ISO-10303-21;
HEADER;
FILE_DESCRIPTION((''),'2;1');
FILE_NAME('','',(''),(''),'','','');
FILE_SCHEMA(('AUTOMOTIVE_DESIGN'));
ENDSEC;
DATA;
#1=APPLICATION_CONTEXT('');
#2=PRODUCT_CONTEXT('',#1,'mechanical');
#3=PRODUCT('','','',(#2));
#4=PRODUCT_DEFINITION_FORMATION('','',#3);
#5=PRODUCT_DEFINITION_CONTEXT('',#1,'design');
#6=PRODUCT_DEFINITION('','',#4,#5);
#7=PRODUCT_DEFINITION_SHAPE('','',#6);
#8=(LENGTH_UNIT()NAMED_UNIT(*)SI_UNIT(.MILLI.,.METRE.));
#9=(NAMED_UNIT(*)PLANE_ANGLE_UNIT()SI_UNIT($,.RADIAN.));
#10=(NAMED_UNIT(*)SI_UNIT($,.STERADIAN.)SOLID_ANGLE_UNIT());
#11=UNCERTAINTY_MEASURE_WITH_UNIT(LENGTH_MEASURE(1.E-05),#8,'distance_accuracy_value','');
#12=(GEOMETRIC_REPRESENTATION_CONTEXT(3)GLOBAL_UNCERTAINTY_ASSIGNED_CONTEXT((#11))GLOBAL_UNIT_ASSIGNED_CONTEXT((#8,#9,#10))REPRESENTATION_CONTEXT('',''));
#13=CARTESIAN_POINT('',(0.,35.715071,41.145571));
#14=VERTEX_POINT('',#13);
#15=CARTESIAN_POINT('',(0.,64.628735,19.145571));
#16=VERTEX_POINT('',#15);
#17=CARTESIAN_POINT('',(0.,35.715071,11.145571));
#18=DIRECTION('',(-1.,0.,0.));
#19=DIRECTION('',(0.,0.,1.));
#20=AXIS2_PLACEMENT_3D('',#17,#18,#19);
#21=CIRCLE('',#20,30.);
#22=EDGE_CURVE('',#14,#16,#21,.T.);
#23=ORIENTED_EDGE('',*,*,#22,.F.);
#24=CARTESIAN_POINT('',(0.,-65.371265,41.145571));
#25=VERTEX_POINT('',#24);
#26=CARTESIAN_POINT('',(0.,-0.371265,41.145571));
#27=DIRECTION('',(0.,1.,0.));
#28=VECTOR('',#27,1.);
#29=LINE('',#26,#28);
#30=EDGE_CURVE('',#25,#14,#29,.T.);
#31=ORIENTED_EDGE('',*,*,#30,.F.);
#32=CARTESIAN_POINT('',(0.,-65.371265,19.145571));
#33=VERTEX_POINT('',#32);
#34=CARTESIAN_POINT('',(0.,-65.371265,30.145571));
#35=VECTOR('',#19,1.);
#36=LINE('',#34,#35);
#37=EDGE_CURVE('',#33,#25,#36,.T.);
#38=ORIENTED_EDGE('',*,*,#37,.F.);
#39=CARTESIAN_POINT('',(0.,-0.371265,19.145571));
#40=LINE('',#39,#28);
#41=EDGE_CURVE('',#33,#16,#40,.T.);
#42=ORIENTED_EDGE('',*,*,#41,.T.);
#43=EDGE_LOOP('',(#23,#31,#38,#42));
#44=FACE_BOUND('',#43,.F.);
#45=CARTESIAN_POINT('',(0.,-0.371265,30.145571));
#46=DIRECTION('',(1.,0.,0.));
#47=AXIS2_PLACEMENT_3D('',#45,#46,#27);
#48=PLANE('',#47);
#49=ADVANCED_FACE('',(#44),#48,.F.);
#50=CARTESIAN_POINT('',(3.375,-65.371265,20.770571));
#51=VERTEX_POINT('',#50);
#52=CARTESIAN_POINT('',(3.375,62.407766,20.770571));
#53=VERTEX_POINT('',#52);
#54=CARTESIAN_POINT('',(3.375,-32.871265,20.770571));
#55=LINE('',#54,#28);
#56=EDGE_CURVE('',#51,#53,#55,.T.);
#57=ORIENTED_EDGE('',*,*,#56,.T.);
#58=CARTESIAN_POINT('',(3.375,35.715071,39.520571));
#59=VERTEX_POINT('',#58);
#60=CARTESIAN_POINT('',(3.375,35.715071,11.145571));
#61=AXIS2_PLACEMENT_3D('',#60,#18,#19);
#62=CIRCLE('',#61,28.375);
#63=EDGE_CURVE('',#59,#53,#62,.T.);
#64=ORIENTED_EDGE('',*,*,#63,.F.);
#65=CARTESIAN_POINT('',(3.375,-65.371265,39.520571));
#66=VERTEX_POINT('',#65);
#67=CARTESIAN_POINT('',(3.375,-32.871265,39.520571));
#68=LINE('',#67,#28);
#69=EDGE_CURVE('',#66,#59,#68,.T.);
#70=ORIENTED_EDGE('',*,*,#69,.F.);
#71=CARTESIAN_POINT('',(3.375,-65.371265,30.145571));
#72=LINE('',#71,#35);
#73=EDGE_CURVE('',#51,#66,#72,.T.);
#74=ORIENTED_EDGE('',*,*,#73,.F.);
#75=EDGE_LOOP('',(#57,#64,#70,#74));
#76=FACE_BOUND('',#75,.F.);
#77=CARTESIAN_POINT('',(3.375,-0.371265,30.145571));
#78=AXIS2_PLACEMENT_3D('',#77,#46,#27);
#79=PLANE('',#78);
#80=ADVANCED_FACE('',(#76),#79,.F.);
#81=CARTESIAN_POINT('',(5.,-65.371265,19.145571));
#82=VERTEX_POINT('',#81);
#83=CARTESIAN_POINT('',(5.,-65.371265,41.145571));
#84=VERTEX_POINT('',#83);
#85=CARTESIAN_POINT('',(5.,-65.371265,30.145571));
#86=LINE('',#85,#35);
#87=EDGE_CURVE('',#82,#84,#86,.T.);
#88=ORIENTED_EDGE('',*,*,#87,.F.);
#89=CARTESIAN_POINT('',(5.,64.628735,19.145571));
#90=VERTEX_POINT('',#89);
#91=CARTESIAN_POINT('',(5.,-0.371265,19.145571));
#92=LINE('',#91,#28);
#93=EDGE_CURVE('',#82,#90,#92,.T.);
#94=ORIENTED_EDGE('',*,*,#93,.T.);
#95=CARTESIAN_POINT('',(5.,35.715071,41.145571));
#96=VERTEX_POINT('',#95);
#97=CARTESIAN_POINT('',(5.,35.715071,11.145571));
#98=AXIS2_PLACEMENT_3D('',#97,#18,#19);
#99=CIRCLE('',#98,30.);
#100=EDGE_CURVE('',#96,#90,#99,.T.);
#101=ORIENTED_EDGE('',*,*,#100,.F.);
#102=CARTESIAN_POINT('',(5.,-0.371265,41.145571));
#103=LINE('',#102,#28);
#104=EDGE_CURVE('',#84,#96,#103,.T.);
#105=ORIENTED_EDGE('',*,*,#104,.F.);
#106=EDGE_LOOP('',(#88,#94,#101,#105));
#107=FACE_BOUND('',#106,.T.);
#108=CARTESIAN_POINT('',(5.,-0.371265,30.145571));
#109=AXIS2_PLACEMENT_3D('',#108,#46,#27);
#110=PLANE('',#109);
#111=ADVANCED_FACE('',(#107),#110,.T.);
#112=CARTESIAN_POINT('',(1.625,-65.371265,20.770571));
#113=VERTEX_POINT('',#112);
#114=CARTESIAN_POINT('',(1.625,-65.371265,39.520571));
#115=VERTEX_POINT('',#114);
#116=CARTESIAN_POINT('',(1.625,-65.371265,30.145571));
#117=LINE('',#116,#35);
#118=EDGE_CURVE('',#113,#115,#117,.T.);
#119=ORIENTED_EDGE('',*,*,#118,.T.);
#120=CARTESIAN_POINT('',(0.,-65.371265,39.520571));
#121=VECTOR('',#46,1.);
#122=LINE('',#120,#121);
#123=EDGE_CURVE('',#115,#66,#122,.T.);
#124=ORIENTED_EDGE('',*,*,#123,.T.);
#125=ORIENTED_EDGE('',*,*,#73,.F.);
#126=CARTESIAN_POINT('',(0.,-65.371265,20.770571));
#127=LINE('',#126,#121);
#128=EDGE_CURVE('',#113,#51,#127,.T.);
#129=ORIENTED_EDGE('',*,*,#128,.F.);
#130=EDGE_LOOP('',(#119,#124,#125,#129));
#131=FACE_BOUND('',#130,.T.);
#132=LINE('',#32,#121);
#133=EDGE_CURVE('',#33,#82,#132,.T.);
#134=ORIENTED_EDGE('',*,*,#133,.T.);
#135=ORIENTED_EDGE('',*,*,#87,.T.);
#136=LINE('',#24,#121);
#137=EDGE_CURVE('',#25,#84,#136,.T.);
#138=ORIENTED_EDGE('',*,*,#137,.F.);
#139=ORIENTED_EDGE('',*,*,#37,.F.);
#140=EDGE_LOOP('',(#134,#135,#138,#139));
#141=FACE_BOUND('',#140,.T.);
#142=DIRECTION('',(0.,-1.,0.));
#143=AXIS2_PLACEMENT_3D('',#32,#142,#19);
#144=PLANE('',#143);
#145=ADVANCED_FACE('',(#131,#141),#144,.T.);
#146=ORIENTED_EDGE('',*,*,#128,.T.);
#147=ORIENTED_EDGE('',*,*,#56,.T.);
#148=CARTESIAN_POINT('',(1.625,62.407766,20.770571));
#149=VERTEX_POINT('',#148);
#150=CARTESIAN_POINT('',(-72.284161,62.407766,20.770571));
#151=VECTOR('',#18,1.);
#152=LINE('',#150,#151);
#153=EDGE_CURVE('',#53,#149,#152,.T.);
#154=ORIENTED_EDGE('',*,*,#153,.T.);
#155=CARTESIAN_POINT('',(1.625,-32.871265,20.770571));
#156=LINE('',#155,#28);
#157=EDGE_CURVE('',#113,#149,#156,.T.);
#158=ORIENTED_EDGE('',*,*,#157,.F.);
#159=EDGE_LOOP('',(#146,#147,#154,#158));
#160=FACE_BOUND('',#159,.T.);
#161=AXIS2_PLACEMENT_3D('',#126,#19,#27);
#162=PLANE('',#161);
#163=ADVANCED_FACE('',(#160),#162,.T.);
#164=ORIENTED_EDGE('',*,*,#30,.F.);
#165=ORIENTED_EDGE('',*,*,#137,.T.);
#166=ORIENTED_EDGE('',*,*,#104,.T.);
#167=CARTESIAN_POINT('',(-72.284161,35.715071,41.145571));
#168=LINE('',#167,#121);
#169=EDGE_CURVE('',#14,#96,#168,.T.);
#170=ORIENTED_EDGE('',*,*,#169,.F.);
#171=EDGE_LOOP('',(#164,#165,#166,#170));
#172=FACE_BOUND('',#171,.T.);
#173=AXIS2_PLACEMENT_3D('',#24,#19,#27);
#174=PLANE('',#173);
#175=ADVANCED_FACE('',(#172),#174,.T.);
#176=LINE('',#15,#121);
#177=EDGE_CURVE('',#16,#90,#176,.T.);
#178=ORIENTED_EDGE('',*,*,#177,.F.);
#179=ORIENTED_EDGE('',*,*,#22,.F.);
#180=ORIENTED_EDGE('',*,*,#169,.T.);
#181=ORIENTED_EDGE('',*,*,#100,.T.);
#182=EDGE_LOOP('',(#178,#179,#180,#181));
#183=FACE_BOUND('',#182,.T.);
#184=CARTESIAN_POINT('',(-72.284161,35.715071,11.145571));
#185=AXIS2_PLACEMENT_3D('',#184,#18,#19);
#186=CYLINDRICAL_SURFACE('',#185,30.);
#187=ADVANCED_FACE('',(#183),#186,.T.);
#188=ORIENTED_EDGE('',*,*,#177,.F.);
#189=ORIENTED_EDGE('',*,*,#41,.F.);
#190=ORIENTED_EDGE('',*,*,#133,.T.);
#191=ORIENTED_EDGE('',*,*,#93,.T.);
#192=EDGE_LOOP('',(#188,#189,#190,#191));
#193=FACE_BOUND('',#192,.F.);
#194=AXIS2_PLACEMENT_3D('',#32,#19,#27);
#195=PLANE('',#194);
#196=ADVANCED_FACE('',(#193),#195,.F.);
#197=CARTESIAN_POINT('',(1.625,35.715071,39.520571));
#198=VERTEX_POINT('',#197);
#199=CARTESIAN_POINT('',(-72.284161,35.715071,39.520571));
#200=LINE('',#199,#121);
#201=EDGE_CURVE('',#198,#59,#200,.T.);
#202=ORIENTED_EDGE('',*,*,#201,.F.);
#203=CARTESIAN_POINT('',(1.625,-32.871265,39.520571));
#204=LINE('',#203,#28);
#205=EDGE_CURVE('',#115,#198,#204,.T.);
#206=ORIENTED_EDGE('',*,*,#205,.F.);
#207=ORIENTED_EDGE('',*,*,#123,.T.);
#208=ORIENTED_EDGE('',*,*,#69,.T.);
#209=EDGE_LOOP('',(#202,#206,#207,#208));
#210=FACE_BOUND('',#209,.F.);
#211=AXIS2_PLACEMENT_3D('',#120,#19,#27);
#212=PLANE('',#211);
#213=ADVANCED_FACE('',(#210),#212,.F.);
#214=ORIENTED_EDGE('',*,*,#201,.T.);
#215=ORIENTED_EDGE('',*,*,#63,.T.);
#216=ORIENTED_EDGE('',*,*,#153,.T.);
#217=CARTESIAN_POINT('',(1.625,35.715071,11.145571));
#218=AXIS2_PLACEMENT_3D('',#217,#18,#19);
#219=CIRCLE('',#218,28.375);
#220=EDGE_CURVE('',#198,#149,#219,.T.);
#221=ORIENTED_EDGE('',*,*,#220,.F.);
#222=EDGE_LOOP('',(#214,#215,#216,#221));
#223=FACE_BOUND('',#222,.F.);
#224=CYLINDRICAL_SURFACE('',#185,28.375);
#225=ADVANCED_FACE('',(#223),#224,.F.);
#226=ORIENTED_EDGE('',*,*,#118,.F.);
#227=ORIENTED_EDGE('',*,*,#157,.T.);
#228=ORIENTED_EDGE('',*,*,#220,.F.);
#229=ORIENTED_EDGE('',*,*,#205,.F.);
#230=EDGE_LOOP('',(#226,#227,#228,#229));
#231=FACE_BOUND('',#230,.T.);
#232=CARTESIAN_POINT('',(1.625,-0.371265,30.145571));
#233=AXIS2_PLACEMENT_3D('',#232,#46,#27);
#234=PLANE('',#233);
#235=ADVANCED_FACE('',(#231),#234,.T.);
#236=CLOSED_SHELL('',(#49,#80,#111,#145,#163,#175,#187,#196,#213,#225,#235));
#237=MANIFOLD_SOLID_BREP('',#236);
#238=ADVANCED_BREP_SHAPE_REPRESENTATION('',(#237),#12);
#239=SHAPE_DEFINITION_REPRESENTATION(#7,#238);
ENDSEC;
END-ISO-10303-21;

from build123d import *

# Parameters (mm, degrees)
F0_W        = 130
F0_H        = 22
F1_DEPTH    = 5
F2_T1_DEPTH = 149.568322948
F3_T        = -1.625


# Not quite as in the source:
# - a fillet or chamfer that OpenCascade refuses, or shapes differently, is made with other operations: its cross-section is extruded or revolved along the edge and cut away or added


with BuildPart() as f1:
    # F0 (on Right) → F1 (new body)
    with BuildSketch(Plane.YZ):
        with Locations((-0.3712646805, 30.1455706358)):
            Rectangle(F0_W, F0_H)
    extrude(amount=F1_DEPTH)

    # F2: fillet of radius 30 on 1 edges, made by hand

    # F2_s2 → F2_t1 (cut)
    with BuildSketch(Plane.YZ.offset(-72.284161474)):
        with BuildLine():
            ThreePointArc((35.7150707299, 41.1455706358), (53.8809728545, 35.0202434084), (64.6287353195, 19.1455706358))
            Line((64.6287353195, 19.1455706358), (64.6287353195, 41.1455706358))
            Line((64.6287353195, 41.1455706358), (35.7150707299, 41.1455706358))
        make_face()
    extrude(amount=F2_T1_DEPTH, mode=Mode.SUBTRACT)

    # F3
    f3_openings = [f1.faces().sort_by_distance(p)[0] for p in [
        (2.5, -65.371265, 30.145571),
    ]]
    offset(amount=F3_T, openings=f3_openings)


solid = f1.part
